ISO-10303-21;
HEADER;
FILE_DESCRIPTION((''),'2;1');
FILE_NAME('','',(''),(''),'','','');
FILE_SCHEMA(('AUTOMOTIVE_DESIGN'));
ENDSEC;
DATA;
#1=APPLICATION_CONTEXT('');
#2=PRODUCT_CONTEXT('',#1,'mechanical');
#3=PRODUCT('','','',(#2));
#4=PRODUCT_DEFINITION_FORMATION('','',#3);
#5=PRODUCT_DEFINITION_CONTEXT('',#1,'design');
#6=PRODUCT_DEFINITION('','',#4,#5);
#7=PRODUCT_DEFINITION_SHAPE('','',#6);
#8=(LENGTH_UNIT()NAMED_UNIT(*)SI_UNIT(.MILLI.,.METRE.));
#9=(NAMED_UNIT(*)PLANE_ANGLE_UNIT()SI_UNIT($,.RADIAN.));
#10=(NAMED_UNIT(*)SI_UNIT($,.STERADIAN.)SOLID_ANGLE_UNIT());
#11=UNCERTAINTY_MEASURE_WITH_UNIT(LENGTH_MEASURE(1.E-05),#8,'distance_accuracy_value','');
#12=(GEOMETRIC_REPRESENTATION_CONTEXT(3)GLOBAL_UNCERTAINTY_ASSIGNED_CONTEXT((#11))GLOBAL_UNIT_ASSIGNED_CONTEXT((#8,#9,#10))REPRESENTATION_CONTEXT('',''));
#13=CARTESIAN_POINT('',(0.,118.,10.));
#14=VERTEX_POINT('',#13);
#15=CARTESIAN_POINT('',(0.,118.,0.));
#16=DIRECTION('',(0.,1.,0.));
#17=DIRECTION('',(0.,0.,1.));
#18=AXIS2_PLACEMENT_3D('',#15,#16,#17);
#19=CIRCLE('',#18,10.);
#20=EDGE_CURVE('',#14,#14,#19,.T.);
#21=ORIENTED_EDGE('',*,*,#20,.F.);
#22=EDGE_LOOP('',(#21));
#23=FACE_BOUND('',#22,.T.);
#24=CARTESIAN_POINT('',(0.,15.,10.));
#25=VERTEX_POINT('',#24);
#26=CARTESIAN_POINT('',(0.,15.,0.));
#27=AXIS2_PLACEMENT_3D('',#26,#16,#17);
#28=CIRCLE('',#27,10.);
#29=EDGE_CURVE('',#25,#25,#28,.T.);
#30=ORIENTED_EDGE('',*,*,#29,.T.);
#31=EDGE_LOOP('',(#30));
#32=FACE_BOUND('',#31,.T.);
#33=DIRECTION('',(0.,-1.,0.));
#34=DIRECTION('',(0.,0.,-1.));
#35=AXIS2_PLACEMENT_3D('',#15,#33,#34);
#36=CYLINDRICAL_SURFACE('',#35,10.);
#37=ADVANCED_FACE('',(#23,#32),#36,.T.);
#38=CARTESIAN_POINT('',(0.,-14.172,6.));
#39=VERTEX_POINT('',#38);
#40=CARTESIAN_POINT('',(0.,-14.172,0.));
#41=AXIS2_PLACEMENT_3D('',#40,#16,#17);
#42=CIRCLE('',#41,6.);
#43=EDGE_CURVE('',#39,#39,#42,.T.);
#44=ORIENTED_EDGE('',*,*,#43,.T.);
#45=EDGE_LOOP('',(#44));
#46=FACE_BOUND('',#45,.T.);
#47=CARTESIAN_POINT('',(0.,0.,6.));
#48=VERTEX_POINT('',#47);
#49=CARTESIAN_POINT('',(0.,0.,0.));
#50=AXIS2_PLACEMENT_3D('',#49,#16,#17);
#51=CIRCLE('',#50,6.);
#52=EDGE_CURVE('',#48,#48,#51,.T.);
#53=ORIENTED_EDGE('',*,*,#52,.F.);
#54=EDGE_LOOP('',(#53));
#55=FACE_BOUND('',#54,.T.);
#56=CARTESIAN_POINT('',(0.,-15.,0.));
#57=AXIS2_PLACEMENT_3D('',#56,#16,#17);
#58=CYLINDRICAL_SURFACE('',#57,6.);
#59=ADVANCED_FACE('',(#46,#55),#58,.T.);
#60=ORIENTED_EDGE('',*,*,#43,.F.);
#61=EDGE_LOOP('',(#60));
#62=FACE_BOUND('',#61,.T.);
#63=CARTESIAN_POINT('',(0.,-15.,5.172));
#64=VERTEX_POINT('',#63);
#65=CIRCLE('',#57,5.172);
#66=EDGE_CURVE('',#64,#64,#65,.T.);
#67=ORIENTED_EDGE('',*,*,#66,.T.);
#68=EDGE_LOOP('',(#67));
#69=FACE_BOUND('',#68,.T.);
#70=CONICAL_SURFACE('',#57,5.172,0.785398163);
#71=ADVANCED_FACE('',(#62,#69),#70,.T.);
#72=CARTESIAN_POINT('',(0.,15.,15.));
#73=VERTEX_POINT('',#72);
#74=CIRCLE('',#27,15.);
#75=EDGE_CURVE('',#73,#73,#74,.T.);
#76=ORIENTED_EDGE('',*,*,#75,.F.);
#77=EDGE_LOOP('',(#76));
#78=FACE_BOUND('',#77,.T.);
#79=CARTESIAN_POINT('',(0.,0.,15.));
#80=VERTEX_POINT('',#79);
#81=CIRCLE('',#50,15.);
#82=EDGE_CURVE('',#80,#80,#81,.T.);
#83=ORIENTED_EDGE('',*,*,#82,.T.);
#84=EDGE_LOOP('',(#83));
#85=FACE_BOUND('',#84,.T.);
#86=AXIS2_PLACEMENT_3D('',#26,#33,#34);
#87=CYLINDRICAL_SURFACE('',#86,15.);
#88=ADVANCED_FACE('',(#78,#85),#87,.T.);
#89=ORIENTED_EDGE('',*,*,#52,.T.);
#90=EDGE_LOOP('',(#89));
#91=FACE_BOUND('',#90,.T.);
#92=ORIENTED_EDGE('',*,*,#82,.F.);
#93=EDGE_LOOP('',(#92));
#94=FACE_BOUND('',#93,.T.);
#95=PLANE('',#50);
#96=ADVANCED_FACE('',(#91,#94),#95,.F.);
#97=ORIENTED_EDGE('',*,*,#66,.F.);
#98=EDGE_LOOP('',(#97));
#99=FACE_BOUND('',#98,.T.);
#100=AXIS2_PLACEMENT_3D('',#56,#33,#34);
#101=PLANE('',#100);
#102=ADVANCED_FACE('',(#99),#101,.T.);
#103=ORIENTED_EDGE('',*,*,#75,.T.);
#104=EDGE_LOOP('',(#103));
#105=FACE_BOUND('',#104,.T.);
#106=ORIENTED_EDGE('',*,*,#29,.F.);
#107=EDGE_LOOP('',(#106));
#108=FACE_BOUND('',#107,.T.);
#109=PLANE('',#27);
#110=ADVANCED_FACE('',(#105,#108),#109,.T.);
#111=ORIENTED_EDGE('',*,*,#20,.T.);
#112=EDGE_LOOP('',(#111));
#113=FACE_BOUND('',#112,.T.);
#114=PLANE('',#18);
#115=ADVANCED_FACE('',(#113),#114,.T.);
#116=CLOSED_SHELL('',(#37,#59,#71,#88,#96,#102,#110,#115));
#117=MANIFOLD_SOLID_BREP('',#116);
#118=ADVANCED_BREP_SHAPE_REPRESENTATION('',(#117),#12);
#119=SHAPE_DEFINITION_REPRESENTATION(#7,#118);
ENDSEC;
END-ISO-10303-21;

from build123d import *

# Parameters (mm, degrees)
SKETCH1_R           = 15
BOSS_EXTRUDE1_DEPTH = 15
SKETCH2_R           = 10
BOSS_EXTRUDE2_DEPTH = 103
SKETCH3_R           = 7.5
BOSS_EXTRUDE3_DEPTH = 15


# Read off the part's stored shape, not the designer's step: M12x1.5 Machine Threads Stud1
with BuildPart() as part:
    # Sketch1 → Boss-Extrude1 (new body)
    with BuildSketch(Plane(origin=(0, 0, 0), x_dir=(1, 0, 0), z_dir=(0, 1, 0))):
        with Locations(Location((0, 0, 0), (0, 0, 270))):
            Circle(SKETCH1_R)
    extrude(amount=BOSS_EXTRUDE1_DEPTH)

    # Sketch2 → Boss-Extrude2 (add)
    with BuildSketch(Plane(origin=(0, 15, 0), x_dir=(1, 0, 0), z_dir=(0, 1, 0))):
        with Locations(Location((0, 0, 0), (0, 0, 270))):
            Circle(SKETCH2_R)
    extrude(amount=BOSS_EXTRUDE2_DEPTH)

    # Sketch3 → Boss-Extrude3 (add)
    with BuildSketch(Plane.XZ):
        with Locations(Location((0, 0, 0), (0, 0, 270))):
            Circle(SKETCH3_R)
    extrude(amount=BOSS_EXTRUDE3_DEPTH)

    # M12x1.5 Machine Threads Stud1 outline → M12x1.5 Machine Threads Stud1 (revolve, cut)
    with BuildSketch(Plane.XY):
        Polygon((7.5, 0), (6, 0), (6, -14.172), (5.172, -15), (7.5, -15), align=None)
    revolve(axis=Axis((0, 0, 0), (0, 1, 0)), mode=Mode.SUBTRACT)


solid = part.part
